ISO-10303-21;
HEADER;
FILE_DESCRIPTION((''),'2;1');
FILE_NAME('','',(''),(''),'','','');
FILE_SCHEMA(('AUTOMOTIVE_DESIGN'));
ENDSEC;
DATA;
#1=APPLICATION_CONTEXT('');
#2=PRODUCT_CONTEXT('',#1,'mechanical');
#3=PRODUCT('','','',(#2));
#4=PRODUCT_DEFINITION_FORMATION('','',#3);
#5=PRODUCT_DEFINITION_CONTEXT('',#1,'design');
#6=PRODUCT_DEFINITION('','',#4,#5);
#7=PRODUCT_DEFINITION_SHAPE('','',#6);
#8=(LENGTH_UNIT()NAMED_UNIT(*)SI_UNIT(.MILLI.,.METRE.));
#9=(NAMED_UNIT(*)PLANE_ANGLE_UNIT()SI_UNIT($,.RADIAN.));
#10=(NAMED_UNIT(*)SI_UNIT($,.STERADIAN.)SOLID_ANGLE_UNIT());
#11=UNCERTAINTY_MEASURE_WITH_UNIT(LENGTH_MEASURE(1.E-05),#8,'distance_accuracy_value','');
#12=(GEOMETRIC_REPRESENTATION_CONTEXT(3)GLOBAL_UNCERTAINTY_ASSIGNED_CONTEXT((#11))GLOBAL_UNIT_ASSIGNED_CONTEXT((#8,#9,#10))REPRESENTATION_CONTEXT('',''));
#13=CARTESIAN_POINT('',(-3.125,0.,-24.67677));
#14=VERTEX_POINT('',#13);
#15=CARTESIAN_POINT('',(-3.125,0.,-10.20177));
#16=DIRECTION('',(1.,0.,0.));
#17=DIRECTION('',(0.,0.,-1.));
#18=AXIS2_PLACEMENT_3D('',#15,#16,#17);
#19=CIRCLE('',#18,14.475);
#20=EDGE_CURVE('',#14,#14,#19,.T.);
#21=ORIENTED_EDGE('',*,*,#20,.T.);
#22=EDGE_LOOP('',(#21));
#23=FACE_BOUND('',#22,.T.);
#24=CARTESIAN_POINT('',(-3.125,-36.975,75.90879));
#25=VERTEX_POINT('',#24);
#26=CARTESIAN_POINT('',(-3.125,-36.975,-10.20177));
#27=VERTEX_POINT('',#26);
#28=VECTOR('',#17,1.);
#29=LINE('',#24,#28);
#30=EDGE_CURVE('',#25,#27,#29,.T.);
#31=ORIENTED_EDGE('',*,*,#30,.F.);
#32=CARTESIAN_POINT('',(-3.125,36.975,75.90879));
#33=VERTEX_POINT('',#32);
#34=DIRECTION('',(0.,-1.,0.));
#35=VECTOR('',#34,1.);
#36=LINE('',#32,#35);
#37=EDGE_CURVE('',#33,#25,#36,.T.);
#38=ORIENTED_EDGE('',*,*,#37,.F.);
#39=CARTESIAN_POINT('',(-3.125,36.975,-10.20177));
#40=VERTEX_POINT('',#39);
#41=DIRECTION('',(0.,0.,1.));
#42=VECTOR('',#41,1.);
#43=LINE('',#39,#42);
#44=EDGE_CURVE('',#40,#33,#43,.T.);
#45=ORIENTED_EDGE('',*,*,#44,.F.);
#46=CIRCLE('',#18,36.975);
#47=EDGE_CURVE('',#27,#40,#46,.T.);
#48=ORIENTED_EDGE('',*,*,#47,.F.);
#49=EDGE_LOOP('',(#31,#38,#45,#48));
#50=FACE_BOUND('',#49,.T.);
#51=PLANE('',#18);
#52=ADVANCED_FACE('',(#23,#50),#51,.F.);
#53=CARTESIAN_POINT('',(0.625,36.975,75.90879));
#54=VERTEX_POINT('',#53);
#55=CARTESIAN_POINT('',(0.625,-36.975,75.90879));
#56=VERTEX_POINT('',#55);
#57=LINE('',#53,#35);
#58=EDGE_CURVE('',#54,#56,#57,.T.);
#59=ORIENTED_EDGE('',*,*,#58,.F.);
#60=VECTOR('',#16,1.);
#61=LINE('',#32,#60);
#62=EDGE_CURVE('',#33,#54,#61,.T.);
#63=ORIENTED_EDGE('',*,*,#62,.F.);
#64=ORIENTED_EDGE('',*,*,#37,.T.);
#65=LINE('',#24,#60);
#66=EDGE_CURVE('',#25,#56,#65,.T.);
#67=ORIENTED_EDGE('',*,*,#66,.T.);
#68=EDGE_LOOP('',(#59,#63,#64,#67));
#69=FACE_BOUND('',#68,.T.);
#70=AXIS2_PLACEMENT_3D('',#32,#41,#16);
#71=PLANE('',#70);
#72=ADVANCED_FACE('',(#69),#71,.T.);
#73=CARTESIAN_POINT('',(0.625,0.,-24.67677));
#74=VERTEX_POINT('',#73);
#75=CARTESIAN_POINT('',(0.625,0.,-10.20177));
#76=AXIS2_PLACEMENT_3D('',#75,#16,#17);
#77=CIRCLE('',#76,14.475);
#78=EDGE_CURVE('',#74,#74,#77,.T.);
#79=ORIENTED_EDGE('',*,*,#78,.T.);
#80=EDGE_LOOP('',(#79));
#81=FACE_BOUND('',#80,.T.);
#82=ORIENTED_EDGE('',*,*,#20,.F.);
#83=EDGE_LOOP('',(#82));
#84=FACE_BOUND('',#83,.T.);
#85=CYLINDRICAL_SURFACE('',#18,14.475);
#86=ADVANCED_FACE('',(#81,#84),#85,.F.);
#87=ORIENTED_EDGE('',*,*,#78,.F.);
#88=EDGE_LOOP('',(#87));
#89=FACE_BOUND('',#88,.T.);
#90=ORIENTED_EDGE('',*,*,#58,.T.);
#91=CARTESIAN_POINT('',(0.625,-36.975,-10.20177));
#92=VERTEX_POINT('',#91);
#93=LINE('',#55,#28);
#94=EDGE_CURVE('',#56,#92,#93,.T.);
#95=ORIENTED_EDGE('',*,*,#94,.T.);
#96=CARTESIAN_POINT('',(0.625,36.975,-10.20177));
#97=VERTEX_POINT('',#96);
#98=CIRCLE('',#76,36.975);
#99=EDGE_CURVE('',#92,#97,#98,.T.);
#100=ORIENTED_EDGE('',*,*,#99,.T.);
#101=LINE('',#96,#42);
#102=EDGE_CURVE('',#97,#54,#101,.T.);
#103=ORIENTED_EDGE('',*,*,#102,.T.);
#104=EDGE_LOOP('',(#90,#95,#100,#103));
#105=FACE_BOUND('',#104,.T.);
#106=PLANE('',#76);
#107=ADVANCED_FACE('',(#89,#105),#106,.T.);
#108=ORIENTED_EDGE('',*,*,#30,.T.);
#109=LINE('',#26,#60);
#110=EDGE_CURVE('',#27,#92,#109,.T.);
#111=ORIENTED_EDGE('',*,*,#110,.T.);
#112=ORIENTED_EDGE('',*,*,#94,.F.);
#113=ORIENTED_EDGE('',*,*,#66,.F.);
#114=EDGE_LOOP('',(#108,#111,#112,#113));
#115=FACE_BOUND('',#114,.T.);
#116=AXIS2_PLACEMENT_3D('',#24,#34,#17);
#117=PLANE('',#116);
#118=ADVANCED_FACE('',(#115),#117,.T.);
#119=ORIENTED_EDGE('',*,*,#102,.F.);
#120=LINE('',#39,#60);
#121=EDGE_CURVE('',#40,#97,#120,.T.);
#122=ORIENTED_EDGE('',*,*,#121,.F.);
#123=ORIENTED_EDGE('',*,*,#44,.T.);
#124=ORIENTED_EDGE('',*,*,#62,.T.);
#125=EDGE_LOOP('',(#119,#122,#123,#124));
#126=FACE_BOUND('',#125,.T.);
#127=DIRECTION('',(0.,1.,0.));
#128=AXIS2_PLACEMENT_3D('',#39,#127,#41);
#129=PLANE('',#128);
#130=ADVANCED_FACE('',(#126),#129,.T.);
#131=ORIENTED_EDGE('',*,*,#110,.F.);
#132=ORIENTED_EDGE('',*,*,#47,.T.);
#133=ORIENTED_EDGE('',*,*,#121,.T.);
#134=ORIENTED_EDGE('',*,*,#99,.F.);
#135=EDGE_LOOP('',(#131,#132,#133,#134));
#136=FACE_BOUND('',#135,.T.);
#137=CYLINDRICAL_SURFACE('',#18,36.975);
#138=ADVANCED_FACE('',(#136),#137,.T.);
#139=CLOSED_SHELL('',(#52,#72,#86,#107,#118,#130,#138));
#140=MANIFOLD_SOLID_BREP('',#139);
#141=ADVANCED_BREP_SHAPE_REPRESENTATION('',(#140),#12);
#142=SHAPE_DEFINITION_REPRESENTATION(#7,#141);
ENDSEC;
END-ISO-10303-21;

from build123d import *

# Parameters (mm, degrees)
SKETCH1_R          = 9.65
BASE_FLANGE1_DEPTH = 2.5
SCALE1_SCALE       = 1.5


# Sheet-metal steps are written as plain solids
with BuildPart() as part:
    # Sketch1 → Base-Flange1 (new body)
    with BuildSketch(Plane(origin=(0, 0, 0), x_dir=(0, 0, -1), z_dir=(1, 0, 0))):
        with BuildLine():
            Line((0, 24.65), (-57.40704, 24.65))
            Line((-57.40704, 24.65), (-57.40704, -24.65))
            Line((-57.40704, -24.65), (0, -24.65))
            ThreePointArc((0, -24.65), (24.65, 0), (0, 24.65))
        make_face()
        Circle(SKETCH1_R, mode=Mode.SUBTRACT)
    extrude(amount=-BASE_FLANGE1_DEPTH)


with BuildPart() as part_1:
    # Scale1: scaled about (-1.25, 0, 20.403540004)
    add(part.part.scale(SCALE1_SCALE).moved(Location((0.625, 0, -10.201770002))))


solid = part_1.part
